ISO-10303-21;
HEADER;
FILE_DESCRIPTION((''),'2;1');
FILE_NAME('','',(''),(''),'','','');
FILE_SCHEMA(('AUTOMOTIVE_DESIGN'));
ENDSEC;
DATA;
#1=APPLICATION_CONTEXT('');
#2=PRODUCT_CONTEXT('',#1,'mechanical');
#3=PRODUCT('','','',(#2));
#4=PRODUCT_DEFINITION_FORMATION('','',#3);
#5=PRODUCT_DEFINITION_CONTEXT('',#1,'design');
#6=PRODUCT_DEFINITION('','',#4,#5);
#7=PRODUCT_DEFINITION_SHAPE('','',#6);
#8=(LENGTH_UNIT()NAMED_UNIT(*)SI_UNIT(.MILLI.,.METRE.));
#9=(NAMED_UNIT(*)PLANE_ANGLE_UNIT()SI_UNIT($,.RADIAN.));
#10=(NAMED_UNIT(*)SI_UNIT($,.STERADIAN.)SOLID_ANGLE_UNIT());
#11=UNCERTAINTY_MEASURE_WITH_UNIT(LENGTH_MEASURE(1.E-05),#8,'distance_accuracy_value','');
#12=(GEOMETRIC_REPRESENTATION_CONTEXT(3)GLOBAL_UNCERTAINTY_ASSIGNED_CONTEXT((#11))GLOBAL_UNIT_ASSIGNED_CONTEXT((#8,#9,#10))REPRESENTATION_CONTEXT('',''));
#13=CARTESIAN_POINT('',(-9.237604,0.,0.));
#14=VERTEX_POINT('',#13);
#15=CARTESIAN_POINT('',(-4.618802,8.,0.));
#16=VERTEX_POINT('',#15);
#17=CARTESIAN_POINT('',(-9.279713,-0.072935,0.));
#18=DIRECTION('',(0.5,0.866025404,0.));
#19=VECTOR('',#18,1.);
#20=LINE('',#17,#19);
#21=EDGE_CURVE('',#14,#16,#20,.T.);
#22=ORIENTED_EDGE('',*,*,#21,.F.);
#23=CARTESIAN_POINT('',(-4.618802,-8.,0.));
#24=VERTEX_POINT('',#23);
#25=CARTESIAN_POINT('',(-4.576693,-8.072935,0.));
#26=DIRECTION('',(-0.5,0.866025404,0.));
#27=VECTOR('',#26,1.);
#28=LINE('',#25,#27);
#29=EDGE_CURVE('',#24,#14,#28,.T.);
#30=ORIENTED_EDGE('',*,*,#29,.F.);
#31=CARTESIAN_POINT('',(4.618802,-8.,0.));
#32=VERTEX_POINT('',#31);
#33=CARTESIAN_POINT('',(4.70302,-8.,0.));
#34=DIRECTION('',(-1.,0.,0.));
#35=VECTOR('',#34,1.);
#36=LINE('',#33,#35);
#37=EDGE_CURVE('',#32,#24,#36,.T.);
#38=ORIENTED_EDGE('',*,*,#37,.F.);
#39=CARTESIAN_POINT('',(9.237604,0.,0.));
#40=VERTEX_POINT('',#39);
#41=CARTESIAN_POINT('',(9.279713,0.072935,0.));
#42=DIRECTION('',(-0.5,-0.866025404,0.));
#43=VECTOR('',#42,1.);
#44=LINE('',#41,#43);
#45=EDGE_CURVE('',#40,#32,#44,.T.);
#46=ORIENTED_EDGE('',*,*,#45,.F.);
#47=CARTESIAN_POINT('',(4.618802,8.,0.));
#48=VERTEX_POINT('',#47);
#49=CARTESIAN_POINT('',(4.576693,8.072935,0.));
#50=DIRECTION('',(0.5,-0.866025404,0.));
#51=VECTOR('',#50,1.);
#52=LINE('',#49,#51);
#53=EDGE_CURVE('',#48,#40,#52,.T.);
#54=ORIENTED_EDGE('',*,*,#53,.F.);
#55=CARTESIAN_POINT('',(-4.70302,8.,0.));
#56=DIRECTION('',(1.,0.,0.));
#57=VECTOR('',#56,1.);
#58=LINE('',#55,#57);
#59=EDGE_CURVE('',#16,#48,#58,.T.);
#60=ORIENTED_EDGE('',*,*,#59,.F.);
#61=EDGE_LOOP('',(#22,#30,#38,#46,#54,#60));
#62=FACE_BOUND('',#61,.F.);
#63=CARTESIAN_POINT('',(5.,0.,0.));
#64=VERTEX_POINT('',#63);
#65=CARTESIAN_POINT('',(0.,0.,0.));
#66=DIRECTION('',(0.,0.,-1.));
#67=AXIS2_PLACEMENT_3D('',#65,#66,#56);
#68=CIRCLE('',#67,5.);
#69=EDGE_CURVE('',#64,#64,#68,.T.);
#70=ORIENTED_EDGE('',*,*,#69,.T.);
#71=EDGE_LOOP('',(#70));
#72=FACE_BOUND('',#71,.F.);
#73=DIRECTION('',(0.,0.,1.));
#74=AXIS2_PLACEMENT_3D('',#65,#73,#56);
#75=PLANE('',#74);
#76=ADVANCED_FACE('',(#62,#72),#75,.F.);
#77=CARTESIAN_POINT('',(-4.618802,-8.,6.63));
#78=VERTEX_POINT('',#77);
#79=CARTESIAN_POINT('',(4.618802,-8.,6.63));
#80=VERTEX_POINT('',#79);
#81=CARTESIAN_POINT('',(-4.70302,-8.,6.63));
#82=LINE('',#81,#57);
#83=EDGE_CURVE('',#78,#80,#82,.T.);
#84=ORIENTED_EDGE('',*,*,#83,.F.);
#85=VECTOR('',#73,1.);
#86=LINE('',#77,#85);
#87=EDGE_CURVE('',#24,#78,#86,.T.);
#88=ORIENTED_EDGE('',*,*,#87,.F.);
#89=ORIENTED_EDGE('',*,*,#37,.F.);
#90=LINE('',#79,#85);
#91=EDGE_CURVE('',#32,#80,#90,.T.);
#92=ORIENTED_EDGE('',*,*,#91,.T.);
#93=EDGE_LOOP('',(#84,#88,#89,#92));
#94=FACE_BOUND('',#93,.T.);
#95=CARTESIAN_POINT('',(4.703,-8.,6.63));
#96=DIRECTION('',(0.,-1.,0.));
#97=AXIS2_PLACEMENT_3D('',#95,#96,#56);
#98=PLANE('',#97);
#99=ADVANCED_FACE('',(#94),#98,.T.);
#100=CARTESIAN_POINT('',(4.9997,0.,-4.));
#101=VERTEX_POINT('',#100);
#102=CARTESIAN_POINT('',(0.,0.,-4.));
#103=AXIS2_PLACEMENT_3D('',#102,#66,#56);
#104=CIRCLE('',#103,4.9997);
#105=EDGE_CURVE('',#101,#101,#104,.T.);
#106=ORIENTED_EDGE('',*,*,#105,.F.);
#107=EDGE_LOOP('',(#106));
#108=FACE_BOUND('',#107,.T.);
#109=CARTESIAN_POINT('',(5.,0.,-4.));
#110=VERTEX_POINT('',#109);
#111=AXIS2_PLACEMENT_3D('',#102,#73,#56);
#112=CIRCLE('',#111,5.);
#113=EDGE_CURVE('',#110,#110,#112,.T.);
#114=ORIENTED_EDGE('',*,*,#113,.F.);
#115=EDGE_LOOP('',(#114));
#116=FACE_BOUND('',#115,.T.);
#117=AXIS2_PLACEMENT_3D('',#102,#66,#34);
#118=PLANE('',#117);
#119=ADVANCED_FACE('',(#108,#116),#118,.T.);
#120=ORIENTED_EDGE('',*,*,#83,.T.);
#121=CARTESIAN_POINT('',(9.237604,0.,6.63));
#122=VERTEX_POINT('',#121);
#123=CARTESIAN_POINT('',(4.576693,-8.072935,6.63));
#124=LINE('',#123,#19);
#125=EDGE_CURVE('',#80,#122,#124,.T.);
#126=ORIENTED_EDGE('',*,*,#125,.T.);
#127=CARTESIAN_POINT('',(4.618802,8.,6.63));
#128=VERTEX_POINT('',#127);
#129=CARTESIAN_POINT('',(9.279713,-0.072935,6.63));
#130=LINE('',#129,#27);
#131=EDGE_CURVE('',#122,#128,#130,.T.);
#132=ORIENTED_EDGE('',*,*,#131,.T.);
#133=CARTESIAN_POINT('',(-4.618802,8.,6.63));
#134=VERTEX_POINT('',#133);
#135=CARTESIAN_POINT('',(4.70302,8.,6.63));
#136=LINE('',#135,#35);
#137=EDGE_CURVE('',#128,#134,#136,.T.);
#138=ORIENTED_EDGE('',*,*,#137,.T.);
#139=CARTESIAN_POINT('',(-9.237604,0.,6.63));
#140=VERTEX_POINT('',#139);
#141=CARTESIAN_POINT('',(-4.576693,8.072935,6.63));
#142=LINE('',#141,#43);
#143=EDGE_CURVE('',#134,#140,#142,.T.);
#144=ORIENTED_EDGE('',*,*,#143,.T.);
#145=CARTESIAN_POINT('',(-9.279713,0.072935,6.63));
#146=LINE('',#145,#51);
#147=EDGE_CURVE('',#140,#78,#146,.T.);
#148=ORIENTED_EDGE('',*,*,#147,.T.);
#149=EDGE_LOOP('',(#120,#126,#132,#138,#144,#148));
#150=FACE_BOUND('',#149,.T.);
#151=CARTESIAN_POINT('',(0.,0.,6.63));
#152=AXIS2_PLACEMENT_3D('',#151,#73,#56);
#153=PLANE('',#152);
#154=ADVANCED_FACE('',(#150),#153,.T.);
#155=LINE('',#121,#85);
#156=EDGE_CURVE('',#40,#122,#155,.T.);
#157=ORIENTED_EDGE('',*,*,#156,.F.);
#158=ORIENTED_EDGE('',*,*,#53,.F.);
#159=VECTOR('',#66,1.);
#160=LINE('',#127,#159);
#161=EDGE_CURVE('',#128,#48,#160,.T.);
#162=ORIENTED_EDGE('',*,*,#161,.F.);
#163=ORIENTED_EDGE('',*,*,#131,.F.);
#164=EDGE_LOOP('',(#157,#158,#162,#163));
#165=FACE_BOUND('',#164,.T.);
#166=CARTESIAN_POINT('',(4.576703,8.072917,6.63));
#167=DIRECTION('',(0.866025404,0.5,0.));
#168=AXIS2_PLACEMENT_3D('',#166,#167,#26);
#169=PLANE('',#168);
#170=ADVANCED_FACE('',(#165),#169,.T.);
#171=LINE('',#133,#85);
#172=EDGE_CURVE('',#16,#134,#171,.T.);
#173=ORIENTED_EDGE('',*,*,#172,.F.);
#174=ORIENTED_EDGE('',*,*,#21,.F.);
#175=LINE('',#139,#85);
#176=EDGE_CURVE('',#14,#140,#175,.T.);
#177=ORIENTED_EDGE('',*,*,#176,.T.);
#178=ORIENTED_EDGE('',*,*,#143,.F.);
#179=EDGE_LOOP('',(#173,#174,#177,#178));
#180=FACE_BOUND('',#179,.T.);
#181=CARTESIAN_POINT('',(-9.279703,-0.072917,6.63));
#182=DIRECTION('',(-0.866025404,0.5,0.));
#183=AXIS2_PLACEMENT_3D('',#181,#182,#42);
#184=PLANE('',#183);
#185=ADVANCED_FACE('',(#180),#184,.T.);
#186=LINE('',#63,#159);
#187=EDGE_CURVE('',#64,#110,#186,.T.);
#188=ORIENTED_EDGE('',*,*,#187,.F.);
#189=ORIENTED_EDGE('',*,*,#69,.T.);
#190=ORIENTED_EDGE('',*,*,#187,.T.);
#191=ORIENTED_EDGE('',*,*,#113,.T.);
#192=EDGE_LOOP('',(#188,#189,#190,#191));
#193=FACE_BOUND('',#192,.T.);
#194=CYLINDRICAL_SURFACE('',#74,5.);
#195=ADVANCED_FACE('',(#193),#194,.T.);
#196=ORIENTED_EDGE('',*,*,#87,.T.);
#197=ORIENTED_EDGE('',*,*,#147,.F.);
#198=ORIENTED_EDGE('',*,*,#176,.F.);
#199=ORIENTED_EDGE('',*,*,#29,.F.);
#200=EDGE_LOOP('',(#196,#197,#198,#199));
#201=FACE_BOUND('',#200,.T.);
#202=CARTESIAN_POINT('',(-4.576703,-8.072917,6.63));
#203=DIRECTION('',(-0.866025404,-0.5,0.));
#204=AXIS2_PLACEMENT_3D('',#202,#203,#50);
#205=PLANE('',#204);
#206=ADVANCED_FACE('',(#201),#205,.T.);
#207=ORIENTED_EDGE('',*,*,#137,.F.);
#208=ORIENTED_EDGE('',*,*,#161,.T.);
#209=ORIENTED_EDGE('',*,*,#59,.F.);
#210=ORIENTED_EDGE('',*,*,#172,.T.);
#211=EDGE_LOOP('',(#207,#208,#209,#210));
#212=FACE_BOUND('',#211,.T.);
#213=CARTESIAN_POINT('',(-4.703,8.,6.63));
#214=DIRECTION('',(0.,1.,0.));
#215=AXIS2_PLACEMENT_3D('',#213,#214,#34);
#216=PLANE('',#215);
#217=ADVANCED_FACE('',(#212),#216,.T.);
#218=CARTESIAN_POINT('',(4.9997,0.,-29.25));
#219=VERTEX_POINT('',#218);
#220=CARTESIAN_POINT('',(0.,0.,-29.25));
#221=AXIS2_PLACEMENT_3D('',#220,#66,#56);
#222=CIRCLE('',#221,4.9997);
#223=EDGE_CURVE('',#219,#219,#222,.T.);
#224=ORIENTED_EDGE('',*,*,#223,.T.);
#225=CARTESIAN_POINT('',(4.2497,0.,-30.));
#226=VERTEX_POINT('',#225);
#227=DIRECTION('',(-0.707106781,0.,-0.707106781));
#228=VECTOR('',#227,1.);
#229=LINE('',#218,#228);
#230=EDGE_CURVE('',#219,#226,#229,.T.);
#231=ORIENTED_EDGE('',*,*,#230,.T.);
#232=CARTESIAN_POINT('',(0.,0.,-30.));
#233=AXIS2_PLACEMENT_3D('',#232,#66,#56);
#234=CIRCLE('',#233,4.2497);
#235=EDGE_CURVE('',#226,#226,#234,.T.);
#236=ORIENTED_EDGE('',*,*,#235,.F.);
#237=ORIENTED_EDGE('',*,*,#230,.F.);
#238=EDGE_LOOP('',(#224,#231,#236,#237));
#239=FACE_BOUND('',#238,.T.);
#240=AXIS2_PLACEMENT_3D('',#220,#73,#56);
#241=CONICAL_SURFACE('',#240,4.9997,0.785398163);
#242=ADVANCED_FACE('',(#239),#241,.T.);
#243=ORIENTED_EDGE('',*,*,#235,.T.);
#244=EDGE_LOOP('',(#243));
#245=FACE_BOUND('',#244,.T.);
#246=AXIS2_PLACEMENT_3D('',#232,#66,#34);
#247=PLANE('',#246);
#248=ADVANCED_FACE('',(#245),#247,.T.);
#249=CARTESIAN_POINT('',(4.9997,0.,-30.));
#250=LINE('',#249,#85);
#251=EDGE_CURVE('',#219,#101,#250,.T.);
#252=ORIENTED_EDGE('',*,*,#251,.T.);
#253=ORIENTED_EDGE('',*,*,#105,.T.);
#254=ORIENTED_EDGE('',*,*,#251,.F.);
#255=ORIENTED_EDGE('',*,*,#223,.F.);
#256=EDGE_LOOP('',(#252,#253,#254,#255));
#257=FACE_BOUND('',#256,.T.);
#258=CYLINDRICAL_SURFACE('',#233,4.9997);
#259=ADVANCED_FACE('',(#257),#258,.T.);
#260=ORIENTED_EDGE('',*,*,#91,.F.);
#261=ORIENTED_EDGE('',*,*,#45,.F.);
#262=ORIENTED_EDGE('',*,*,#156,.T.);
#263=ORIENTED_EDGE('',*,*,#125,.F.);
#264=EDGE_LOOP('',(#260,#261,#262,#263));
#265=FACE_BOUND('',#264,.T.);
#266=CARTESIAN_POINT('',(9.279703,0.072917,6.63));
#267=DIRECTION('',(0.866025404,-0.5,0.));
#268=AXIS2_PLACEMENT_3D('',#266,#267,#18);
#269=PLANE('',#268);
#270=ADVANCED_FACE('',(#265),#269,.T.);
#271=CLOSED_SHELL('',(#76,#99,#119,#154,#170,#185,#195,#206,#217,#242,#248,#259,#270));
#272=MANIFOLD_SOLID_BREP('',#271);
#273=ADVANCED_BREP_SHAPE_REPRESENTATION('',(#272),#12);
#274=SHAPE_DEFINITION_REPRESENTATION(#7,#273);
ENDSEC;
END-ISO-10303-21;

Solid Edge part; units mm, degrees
sketch "Sketch1" plane through (0, 0, 0) normal (0, 0, 1) x (1, 0, 0)
  circle A0 centre (0, 0) radius 9.28
  dimension "D1" = 18.56
extrude "Protrusion1" add sketch "Sketch1" along normal blind 6.63
sketch "Sketch2" plane through (0, 0, 0) normal (0, 0, -1) x (1, 0, 0)
  circle A0 centre (0, 0) radius 5
extrude "Protrusion2" add sketch "Sketch2" along normal blind 30
sketch "Sketch3" plane through (0, 0, -30) normal (0, 0, -1) x (1, 0, 0)
  circle A0 centre (0, 0) radius 4.9997
extrude "Cutout1" cut sketch "Sketch3" against normal blind 26 flip side to cut
chamfer "Chamfer_1" distance 0.75 angle 45 1 edges at (-4.9997, 0, -30)
sketch "Sketch4" plane through (0, 0, 6.63) normal (0, 0, 1) x (1, 0, 0)
  line L0 (-4.703, 8) -> (4.703, 8)
  dimension "D1" = 16
extrude "Cutout2" cut sketch "Sketch4" against normal up to next material side at (0, 8.05, 6.63)
pattern_circular "Pattern1" count 6 over 360 about axis through (0, 0, 6.63) along (0, 0, 1) of "Cutout2"
properties part number "24100222"
